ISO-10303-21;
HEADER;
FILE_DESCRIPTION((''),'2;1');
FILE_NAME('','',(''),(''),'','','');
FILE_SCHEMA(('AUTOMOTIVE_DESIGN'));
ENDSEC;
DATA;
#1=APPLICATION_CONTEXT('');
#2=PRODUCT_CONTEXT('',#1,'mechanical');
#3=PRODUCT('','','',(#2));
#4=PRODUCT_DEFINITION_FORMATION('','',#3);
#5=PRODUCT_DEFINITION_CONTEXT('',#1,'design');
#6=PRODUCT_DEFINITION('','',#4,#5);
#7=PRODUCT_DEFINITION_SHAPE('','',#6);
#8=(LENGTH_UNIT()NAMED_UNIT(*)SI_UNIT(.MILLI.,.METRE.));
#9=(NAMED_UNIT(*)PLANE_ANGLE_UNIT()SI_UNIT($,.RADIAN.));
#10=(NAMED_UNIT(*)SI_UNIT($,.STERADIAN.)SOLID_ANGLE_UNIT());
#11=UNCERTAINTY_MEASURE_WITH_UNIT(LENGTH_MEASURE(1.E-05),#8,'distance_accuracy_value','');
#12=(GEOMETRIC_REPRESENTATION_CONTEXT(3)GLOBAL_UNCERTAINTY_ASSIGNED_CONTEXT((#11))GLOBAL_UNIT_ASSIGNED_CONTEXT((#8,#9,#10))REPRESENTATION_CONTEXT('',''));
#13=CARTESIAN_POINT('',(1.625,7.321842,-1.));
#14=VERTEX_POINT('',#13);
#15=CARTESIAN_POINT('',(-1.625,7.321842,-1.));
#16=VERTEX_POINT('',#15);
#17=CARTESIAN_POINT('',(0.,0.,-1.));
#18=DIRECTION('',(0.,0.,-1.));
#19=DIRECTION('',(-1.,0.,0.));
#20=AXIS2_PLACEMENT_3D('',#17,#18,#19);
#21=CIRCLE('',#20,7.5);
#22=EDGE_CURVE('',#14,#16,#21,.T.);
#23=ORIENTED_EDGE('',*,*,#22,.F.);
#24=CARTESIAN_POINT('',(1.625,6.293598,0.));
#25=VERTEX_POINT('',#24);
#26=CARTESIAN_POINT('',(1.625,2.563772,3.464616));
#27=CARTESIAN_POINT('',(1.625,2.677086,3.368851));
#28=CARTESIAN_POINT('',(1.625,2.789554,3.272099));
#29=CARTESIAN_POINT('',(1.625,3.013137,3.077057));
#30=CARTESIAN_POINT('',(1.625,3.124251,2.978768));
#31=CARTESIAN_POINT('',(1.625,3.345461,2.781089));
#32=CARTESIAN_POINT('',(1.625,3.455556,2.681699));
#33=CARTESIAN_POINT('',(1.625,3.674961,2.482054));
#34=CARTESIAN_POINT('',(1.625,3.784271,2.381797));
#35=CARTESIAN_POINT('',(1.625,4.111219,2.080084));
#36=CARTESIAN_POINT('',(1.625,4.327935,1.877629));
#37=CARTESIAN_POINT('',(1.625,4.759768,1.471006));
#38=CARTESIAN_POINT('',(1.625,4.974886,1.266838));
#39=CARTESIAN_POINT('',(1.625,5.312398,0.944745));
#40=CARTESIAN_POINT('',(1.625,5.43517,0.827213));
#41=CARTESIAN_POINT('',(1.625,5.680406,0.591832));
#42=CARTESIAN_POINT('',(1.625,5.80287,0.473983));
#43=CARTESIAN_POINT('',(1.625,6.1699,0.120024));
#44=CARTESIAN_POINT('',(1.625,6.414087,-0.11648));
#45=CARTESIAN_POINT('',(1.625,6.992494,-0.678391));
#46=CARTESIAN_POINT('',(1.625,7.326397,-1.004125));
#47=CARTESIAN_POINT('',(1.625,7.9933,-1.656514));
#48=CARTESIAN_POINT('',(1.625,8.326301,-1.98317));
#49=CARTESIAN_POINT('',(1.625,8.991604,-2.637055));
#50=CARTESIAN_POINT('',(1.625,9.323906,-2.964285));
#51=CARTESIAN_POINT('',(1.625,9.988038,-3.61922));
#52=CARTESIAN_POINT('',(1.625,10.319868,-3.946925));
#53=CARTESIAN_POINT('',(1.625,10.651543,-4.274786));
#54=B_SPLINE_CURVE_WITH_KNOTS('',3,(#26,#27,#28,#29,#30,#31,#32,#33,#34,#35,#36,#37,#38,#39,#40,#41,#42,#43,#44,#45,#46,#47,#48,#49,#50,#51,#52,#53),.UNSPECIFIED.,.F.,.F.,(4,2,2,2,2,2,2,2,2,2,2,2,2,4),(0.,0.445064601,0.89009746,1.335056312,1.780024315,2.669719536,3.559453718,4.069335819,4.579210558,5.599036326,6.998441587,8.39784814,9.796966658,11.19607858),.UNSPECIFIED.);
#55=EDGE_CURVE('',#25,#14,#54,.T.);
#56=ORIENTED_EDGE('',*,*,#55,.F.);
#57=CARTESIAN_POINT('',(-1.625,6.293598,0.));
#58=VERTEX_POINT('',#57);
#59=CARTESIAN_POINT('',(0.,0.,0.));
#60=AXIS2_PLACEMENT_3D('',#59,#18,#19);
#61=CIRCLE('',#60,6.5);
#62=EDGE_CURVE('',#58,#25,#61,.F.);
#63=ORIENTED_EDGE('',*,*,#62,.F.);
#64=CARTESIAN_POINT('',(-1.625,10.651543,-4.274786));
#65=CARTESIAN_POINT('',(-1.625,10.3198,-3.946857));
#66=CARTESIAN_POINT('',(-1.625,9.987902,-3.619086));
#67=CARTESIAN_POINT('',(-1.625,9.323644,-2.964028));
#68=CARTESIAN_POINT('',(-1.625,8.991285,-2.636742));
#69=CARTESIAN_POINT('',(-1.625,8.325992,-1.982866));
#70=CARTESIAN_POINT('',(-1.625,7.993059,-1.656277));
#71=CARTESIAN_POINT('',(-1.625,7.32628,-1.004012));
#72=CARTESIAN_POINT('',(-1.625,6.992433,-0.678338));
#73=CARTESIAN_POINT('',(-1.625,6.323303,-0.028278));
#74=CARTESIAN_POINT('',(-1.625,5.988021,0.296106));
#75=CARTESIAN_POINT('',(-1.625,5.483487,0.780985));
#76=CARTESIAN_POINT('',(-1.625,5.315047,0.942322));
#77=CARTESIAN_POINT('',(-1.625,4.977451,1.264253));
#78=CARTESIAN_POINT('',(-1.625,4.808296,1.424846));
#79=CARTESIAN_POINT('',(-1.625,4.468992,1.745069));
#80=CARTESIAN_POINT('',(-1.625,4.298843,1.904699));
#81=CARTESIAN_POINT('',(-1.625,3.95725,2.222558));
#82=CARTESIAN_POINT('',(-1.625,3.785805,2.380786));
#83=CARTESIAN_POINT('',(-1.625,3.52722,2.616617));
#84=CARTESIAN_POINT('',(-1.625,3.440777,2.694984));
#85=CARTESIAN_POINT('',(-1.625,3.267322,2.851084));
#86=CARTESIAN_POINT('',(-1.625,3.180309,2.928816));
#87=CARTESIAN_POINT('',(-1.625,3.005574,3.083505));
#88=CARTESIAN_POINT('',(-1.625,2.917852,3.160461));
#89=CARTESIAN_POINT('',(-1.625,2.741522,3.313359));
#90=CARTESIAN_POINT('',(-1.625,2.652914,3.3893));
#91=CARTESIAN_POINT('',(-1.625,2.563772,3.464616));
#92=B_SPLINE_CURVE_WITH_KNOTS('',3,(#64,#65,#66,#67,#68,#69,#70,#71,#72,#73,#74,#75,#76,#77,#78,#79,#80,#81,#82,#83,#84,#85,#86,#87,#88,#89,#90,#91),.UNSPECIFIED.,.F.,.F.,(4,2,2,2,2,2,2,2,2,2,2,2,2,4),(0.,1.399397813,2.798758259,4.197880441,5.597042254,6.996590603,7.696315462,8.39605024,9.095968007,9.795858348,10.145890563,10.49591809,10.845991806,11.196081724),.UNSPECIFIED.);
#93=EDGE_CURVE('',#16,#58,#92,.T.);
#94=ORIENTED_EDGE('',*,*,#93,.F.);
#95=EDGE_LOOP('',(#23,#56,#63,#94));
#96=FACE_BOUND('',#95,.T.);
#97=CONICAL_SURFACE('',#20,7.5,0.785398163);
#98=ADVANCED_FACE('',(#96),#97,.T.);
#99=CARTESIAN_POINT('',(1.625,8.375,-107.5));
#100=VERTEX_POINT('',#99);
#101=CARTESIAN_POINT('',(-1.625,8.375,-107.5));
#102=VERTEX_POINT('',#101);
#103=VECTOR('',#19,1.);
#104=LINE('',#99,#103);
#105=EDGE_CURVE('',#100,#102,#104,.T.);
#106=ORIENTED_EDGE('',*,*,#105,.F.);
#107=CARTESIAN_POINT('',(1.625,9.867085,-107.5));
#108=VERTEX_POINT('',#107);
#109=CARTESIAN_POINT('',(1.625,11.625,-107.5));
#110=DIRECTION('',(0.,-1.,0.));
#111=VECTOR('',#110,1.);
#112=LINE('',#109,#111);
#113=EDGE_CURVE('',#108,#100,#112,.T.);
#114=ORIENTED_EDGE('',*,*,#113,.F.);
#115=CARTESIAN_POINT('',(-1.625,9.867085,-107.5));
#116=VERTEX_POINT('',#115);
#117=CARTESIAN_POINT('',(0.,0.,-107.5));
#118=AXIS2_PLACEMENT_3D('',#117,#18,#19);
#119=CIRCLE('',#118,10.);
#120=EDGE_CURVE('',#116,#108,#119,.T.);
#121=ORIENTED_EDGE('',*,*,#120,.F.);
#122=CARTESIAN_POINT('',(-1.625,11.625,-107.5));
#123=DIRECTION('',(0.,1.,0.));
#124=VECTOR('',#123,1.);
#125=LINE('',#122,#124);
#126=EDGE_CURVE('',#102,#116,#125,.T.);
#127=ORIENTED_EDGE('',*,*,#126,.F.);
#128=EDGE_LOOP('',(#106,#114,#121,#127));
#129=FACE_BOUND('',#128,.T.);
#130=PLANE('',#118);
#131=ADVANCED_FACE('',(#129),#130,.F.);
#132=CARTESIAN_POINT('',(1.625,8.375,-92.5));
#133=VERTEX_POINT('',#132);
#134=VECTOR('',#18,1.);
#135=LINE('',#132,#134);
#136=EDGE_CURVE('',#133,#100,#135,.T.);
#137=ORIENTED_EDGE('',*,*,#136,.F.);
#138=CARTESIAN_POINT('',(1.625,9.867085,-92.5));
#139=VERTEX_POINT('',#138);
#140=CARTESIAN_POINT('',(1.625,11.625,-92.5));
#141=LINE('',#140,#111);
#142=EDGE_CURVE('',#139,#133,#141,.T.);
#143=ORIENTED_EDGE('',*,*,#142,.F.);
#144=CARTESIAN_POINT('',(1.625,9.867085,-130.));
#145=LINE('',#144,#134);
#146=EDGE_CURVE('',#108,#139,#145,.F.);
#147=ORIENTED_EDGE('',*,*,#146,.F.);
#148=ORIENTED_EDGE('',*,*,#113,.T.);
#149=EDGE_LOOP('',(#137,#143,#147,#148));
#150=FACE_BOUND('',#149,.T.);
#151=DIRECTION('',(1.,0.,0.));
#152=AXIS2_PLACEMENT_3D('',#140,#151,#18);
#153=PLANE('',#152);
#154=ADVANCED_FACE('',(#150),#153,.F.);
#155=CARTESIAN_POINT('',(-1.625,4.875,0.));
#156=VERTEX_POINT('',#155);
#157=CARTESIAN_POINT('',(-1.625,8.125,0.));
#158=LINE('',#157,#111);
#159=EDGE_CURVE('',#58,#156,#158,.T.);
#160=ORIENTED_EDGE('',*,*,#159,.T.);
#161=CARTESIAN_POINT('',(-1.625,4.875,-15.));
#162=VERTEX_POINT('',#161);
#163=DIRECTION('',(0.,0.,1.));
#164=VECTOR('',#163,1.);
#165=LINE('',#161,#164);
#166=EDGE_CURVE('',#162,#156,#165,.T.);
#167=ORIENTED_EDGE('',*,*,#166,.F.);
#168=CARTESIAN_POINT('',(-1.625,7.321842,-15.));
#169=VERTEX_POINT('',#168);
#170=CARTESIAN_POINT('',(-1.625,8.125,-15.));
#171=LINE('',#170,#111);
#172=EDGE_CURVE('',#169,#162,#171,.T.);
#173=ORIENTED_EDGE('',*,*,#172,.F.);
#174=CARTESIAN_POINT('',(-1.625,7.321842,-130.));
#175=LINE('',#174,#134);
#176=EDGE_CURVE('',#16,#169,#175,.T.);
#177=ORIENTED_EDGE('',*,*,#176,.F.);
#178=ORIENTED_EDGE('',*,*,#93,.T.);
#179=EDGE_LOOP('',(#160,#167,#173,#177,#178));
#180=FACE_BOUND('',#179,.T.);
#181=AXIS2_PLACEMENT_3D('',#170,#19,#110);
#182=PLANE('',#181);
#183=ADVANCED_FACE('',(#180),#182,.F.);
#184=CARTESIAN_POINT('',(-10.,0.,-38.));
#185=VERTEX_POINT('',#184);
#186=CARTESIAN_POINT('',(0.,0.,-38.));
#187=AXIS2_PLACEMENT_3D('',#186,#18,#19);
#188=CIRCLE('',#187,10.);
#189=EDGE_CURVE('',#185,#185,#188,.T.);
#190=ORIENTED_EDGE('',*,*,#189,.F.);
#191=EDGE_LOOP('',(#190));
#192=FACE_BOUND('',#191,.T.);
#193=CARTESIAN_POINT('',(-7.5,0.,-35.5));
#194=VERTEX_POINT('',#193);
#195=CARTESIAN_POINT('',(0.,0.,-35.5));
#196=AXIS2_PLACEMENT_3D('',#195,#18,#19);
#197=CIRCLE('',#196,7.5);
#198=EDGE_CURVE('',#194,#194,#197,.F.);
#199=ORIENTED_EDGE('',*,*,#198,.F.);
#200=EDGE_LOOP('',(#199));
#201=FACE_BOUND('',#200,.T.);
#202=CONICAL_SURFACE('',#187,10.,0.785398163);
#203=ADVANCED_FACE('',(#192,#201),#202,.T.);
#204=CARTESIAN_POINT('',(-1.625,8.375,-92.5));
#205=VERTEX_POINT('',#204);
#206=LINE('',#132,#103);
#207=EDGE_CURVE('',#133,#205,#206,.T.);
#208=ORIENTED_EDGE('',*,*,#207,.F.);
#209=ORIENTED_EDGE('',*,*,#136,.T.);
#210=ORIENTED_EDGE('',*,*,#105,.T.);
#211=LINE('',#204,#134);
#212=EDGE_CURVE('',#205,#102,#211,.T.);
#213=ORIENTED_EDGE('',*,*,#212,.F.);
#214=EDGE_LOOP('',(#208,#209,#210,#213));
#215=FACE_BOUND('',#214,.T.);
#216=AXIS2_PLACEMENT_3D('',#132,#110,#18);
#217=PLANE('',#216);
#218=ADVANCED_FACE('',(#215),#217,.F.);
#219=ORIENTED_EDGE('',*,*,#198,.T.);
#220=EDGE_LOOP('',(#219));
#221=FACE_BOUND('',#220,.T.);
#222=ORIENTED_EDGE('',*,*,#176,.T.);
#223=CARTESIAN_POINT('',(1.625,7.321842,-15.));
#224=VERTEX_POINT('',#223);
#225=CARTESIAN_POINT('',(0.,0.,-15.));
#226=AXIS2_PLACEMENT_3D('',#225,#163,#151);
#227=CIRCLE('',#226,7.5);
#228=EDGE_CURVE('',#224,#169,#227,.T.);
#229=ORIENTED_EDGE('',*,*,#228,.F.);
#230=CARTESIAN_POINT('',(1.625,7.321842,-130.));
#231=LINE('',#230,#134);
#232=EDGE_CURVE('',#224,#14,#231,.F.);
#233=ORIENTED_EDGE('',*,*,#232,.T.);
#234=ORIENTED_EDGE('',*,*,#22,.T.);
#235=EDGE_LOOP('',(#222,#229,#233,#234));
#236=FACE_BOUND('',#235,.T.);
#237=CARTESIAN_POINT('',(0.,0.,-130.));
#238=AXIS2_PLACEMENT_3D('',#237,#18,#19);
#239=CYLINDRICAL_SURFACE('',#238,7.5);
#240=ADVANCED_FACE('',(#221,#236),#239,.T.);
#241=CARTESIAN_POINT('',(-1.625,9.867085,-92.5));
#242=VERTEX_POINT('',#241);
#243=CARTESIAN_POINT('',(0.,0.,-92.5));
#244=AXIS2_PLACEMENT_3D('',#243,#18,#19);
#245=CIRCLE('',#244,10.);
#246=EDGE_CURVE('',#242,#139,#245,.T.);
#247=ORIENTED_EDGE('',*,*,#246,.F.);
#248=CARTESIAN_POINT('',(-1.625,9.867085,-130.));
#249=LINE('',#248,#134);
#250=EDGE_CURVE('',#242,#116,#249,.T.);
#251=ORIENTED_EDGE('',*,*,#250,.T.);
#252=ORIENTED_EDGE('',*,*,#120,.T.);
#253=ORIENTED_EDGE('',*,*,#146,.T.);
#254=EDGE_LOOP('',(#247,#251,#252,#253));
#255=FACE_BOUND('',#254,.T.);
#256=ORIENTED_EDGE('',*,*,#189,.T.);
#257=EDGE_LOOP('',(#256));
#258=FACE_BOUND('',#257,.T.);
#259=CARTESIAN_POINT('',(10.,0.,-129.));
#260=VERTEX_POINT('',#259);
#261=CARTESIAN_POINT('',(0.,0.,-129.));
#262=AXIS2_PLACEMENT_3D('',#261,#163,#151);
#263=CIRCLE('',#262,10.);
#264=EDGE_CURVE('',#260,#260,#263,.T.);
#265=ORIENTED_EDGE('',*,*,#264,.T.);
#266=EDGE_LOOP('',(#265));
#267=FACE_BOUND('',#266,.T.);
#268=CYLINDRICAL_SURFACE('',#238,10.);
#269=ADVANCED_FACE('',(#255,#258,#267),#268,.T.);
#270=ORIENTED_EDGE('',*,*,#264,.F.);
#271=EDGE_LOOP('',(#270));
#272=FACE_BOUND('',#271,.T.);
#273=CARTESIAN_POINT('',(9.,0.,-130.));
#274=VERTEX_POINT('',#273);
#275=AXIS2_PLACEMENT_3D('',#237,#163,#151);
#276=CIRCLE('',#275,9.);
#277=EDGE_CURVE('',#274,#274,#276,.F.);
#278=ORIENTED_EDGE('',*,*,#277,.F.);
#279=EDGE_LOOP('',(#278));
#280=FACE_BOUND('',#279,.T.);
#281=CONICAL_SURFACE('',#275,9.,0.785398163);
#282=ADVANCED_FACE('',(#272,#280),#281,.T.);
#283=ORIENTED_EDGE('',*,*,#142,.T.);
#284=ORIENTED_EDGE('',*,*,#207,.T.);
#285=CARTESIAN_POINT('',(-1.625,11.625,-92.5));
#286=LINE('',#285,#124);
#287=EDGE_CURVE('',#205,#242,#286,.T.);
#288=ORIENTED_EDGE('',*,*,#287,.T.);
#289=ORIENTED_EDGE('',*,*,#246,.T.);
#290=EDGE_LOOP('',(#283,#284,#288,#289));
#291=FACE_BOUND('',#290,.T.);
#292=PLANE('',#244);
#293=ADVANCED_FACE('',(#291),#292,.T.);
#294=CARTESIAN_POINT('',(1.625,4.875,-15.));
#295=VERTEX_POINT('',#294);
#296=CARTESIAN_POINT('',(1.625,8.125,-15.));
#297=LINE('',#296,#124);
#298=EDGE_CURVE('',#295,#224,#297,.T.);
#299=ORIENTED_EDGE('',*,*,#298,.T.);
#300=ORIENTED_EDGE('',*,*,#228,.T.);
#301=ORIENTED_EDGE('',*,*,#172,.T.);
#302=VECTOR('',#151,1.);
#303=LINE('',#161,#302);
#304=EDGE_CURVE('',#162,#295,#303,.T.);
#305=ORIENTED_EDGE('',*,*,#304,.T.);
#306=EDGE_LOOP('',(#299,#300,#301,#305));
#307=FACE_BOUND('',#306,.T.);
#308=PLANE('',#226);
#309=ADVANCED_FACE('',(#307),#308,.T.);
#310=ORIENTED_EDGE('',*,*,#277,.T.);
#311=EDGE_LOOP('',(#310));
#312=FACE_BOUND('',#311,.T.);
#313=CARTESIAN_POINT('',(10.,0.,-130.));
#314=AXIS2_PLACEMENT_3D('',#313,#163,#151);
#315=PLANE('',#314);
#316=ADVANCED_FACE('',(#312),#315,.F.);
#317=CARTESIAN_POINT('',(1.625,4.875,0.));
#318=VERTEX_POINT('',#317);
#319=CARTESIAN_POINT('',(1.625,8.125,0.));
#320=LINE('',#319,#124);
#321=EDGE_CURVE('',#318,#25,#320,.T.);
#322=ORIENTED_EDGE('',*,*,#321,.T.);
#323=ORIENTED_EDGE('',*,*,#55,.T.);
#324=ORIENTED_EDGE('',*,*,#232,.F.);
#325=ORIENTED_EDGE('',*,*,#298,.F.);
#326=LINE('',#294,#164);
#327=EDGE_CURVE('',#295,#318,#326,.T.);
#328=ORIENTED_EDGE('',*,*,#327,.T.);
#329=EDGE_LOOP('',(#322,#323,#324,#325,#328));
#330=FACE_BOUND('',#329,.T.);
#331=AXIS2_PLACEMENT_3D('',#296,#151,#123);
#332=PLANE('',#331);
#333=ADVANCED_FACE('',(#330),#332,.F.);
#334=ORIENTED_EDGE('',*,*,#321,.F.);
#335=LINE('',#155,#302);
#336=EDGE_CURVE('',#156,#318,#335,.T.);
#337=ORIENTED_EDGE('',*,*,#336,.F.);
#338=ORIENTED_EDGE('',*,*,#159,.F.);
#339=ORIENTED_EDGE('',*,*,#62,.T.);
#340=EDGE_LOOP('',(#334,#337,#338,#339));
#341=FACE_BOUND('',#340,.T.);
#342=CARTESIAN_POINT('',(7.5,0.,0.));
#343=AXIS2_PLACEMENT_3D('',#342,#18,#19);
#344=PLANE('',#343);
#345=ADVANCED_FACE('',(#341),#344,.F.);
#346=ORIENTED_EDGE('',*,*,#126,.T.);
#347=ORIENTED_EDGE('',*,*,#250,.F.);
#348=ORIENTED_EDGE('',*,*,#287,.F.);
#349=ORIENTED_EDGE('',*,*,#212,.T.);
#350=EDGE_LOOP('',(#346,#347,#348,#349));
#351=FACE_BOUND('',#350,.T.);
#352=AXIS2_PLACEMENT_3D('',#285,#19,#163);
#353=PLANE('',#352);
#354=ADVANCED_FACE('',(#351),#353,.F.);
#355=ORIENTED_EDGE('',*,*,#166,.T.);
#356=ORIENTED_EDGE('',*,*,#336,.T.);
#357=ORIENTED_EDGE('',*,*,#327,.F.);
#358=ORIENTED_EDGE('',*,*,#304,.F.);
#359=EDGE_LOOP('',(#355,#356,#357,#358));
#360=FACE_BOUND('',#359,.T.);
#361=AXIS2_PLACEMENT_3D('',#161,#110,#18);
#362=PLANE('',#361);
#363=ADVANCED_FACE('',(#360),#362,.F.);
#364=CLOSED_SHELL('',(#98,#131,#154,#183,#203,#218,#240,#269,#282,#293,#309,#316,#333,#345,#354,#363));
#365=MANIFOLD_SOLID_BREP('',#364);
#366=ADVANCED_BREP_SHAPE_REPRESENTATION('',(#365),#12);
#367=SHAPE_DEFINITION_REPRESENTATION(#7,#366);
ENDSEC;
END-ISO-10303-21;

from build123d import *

# Parameters (mm, degrees)
CHAMFER1_SIZE      = 1
SKETCH3_W          = 3.25
SKETCH3_H          = 3.25
CUT_EXTRUDE2_DEPTH = 15
SKETCH4_W          = 3.25
SKETCH4_H          = 3.25
CUT_EXTRUDE3_DEPTH = 15
CHAMFER2_SIZE      = 3


with BuildPart() as part:
    # Sketch1 → Revolve1 (revolve)
    with BuildSketch(Plane(origin=(0, 0, 0), x_dir=(1, 0, 0), z_dir=(0, 1, 0)), mode=Mode.PRIVATE) as revolve1_sk:
        Polygon((10, 35), (7.5, 35), (7.5, 0), (0, 0), (0, 130), (10, 130), align=None)
    revolve(revolve1_sk.sketch.rotate(Axis((0, 0, -130), (0, 0, 1)), 180), axis=Axis((0, 0, -130), (0, 0, 1)))

    # Chamfer1
    chamfer1_edges = [part.edges().sort_by_distance(p)[0] for p in [
        (7.5, 0, 0),
        (10, 0, -130),
    ]]
    chamfer(chamfer1_edges, length=CHAMFER1_SIZE)

    # Sketch3 → Cut-Extrude2 (cut)
    with BuildSketch(Plane(origin=(0, 0, -107.5), x_dir=(-1, 0, 0), z_dir=(0, 0, -1))):
        with Locations((0, 10)):
            Rectangle(SKETCH3_W, SKETCH3_H)
    extrude(amount=-CUT_EXTRUDE2_DEPTH, mode=Mode.SUBTRACT)

    # Sketch4 → Cut-Extrude3 (cut)
    with BuildSketch(Plane.XY):
        with Locations((0, 6.5)):
            Rectangle(SKETCH4_W, SKETCH4_H)
    extrude(amount=-CUT_EXTRUDE3_DEPTH, mode=Mode.SUBTRACT)

    # Chamfer2
    # the kernel refuses this chamfer: 3 mm, written as the material it takes off along each edge
    with BuildSketch(Plane(origin=(0, 0, -35), x_dir=(-1, 0, 0), z_dir=(0, 1, 0))) as chamfer2_piece_1_section:
        Polygon((10 - CHAMFER2_SIZE, 0), (10, -CHAMFER2_SIZE), (10, 0), align=None)
    chamfer2_piece_1 = revolve(axis=Axis((0, 0, -35), (0, 0, 1)), mode=Mode.PRIVATE)
    chamfer2_piece_1 = chamfer2_piece_1 - Plane(origin=(0, 0, -36.746638668), x_dir=(-1, 0, 0), z_dir=(0, 0, 1)) * Cylinder(7.5, 41, mode=Mode.PRIVATE)
    add(chamfer2_piece_1, mode=Mode.SUBTRACT)


solid = part.part
